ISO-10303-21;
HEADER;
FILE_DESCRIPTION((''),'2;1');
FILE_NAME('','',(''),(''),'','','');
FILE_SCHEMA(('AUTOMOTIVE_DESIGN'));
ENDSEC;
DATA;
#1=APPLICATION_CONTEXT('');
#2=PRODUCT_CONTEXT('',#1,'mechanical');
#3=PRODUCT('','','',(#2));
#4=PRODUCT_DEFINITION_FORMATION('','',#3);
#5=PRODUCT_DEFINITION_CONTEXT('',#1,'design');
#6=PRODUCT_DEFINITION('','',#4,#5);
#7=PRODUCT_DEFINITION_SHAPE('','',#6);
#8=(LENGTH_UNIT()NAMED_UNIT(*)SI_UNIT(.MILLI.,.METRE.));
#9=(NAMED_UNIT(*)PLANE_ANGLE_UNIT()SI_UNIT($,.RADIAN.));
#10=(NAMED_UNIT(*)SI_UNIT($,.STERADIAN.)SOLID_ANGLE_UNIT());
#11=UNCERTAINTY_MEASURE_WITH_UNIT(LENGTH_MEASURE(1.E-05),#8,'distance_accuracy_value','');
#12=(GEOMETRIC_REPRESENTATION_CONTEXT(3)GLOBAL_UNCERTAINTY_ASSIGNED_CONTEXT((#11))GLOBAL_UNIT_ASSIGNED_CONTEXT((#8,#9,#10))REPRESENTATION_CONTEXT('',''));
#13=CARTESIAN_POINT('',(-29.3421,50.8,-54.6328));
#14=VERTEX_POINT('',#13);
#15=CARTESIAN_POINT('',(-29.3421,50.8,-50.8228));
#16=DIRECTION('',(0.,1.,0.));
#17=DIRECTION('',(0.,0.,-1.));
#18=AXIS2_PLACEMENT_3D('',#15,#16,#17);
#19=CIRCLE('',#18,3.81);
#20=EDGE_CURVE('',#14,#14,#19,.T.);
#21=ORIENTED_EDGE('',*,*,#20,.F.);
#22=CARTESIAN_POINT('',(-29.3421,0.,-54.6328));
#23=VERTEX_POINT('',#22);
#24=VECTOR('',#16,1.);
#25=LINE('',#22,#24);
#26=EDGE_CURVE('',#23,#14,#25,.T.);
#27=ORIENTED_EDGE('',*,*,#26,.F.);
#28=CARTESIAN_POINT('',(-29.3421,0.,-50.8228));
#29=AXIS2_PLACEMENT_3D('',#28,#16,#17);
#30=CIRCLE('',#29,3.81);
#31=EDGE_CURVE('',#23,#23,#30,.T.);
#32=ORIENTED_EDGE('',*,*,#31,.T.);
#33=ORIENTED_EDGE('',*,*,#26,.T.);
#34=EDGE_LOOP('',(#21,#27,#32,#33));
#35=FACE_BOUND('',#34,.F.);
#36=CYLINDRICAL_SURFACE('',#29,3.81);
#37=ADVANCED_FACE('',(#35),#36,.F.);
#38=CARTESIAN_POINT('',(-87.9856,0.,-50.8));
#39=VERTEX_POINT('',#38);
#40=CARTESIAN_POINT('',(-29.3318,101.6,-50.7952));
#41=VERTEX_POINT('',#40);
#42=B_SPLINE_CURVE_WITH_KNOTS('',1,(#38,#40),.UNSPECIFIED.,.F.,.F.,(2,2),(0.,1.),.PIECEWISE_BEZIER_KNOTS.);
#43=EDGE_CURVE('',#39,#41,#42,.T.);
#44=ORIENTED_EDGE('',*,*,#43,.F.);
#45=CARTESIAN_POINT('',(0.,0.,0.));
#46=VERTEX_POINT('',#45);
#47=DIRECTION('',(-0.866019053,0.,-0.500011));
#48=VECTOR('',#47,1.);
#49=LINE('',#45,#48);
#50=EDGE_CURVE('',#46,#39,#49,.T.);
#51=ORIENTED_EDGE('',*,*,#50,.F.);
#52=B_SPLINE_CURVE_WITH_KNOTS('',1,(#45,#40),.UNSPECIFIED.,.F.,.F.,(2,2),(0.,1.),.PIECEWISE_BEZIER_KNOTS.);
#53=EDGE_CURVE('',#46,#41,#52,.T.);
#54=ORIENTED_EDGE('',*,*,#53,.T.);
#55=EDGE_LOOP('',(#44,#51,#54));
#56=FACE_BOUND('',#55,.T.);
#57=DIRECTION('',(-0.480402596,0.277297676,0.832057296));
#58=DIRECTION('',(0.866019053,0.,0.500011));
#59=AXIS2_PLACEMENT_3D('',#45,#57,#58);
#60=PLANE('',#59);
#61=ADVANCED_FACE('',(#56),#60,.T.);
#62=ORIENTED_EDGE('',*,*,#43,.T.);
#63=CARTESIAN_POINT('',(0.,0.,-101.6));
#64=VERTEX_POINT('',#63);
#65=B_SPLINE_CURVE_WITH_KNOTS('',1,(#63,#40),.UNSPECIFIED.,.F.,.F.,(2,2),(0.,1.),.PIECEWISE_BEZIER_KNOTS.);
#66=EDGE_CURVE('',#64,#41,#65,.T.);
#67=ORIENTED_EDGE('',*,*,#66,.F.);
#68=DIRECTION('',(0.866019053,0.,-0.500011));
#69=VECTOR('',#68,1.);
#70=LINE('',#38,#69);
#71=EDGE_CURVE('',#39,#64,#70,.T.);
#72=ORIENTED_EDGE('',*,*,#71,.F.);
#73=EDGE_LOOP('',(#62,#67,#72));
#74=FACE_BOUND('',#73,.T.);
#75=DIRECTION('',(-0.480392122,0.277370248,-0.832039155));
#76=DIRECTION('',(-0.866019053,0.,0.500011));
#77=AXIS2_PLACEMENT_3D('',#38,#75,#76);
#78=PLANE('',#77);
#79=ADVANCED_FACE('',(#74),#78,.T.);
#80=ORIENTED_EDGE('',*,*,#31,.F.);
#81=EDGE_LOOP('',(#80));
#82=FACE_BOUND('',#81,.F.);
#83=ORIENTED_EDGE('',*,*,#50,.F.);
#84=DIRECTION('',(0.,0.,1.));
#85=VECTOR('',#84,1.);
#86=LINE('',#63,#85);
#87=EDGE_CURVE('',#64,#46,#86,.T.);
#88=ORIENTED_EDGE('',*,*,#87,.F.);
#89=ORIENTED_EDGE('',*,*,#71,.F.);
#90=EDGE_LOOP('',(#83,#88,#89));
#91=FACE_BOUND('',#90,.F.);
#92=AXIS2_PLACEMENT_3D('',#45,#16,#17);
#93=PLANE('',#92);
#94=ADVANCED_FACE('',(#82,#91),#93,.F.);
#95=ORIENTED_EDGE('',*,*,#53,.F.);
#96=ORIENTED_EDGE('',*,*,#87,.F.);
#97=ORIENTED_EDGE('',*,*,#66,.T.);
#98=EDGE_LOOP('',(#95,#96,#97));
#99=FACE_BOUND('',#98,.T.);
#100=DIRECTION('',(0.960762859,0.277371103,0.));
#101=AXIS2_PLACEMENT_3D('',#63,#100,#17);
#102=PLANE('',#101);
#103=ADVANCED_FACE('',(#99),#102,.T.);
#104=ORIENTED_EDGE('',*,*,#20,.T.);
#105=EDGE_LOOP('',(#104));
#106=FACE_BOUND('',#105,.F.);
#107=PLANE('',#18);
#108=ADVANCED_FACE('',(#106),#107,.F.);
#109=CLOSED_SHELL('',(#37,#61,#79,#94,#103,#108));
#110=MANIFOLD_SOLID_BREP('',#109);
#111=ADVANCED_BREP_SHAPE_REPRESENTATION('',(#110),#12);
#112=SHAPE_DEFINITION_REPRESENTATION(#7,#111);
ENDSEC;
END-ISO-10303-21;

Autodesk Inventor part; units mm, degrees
ref_plane "YZ Plane" through (0, 0, 0) normal (1, 0, 0) x (0, 1, 0)
ref_plane "XY Plane" through (0, 0, 0) normal (0, 0, 1) x (1, 0, 0)
sketch "Sketch1" plane through (0, 0, 0) normal (0, 1, 0) x (-1, 0, 0)
  line L0 (0, 0) -> (87.9856, -50.8)
  line L1 (87.9856, -50.8) -> (0, -101.6)
  line L2 (0, -101.6) -> (0, 0)
  dimension "d0" = 50.8
  dimension "d1" = 101.6
  dimension "d2" = 87.9856
ref_plane "Work Plane1" through (0, 101.6, 0) normal (0, 1, 0) x (-1, 0, 0)
sketch "Sketch2" plane through (0, 101.6, 0) normal (0, 1, 0) x (-1, 0, 0)
  line L0 (87.9856, -50.8) -> (0, -101.6) projected
  line L1 (0, 0) -> (87.9856, -50.8) projected
  line L2 (0, -101.6) -> (0, 0) projected
  line L3 (43.9928, -76.2) -> (29.3318, -50.7952)
  line L4 (29.3318, -50.7952) -> (43.3864, -25.0499)
  line L5 (29.3318, -50.7952) -> (0, -50.7952)
loft "Loft1" add profiles "Sketch1" section 2 point at (-29.3318, 101.6, -50.7952)
sketch "Sketch3" plane through (0, 0, -101.6) normal (0, -1, 0) x (1, 0, 0)
  line L0 (-29.3421, 50.7772) -> (-43.9928, 76.2)
  line L1 (0, 101.6) -> (-87.9856, 50.8) projected
  line L2 (-29.3421, 50.7772) -> (0, 50.7772)
  line L3 (0, 0) -> (0, 101.6) projected
  line L4 (-29.3421, 50.7772) -> (-42.6757, 24.6396)
  line L5 (-87.9856, 50.8) -> (0, 0) projected
hole "Hole1" at (-29.3421, 0, -50.8228) direction (0, 1, 0) diameter 7.62 depth 50.8
equation "\"d0\" = 0.5 * d1"
properties part number "marker pyramid" material "ABS Plastic"
